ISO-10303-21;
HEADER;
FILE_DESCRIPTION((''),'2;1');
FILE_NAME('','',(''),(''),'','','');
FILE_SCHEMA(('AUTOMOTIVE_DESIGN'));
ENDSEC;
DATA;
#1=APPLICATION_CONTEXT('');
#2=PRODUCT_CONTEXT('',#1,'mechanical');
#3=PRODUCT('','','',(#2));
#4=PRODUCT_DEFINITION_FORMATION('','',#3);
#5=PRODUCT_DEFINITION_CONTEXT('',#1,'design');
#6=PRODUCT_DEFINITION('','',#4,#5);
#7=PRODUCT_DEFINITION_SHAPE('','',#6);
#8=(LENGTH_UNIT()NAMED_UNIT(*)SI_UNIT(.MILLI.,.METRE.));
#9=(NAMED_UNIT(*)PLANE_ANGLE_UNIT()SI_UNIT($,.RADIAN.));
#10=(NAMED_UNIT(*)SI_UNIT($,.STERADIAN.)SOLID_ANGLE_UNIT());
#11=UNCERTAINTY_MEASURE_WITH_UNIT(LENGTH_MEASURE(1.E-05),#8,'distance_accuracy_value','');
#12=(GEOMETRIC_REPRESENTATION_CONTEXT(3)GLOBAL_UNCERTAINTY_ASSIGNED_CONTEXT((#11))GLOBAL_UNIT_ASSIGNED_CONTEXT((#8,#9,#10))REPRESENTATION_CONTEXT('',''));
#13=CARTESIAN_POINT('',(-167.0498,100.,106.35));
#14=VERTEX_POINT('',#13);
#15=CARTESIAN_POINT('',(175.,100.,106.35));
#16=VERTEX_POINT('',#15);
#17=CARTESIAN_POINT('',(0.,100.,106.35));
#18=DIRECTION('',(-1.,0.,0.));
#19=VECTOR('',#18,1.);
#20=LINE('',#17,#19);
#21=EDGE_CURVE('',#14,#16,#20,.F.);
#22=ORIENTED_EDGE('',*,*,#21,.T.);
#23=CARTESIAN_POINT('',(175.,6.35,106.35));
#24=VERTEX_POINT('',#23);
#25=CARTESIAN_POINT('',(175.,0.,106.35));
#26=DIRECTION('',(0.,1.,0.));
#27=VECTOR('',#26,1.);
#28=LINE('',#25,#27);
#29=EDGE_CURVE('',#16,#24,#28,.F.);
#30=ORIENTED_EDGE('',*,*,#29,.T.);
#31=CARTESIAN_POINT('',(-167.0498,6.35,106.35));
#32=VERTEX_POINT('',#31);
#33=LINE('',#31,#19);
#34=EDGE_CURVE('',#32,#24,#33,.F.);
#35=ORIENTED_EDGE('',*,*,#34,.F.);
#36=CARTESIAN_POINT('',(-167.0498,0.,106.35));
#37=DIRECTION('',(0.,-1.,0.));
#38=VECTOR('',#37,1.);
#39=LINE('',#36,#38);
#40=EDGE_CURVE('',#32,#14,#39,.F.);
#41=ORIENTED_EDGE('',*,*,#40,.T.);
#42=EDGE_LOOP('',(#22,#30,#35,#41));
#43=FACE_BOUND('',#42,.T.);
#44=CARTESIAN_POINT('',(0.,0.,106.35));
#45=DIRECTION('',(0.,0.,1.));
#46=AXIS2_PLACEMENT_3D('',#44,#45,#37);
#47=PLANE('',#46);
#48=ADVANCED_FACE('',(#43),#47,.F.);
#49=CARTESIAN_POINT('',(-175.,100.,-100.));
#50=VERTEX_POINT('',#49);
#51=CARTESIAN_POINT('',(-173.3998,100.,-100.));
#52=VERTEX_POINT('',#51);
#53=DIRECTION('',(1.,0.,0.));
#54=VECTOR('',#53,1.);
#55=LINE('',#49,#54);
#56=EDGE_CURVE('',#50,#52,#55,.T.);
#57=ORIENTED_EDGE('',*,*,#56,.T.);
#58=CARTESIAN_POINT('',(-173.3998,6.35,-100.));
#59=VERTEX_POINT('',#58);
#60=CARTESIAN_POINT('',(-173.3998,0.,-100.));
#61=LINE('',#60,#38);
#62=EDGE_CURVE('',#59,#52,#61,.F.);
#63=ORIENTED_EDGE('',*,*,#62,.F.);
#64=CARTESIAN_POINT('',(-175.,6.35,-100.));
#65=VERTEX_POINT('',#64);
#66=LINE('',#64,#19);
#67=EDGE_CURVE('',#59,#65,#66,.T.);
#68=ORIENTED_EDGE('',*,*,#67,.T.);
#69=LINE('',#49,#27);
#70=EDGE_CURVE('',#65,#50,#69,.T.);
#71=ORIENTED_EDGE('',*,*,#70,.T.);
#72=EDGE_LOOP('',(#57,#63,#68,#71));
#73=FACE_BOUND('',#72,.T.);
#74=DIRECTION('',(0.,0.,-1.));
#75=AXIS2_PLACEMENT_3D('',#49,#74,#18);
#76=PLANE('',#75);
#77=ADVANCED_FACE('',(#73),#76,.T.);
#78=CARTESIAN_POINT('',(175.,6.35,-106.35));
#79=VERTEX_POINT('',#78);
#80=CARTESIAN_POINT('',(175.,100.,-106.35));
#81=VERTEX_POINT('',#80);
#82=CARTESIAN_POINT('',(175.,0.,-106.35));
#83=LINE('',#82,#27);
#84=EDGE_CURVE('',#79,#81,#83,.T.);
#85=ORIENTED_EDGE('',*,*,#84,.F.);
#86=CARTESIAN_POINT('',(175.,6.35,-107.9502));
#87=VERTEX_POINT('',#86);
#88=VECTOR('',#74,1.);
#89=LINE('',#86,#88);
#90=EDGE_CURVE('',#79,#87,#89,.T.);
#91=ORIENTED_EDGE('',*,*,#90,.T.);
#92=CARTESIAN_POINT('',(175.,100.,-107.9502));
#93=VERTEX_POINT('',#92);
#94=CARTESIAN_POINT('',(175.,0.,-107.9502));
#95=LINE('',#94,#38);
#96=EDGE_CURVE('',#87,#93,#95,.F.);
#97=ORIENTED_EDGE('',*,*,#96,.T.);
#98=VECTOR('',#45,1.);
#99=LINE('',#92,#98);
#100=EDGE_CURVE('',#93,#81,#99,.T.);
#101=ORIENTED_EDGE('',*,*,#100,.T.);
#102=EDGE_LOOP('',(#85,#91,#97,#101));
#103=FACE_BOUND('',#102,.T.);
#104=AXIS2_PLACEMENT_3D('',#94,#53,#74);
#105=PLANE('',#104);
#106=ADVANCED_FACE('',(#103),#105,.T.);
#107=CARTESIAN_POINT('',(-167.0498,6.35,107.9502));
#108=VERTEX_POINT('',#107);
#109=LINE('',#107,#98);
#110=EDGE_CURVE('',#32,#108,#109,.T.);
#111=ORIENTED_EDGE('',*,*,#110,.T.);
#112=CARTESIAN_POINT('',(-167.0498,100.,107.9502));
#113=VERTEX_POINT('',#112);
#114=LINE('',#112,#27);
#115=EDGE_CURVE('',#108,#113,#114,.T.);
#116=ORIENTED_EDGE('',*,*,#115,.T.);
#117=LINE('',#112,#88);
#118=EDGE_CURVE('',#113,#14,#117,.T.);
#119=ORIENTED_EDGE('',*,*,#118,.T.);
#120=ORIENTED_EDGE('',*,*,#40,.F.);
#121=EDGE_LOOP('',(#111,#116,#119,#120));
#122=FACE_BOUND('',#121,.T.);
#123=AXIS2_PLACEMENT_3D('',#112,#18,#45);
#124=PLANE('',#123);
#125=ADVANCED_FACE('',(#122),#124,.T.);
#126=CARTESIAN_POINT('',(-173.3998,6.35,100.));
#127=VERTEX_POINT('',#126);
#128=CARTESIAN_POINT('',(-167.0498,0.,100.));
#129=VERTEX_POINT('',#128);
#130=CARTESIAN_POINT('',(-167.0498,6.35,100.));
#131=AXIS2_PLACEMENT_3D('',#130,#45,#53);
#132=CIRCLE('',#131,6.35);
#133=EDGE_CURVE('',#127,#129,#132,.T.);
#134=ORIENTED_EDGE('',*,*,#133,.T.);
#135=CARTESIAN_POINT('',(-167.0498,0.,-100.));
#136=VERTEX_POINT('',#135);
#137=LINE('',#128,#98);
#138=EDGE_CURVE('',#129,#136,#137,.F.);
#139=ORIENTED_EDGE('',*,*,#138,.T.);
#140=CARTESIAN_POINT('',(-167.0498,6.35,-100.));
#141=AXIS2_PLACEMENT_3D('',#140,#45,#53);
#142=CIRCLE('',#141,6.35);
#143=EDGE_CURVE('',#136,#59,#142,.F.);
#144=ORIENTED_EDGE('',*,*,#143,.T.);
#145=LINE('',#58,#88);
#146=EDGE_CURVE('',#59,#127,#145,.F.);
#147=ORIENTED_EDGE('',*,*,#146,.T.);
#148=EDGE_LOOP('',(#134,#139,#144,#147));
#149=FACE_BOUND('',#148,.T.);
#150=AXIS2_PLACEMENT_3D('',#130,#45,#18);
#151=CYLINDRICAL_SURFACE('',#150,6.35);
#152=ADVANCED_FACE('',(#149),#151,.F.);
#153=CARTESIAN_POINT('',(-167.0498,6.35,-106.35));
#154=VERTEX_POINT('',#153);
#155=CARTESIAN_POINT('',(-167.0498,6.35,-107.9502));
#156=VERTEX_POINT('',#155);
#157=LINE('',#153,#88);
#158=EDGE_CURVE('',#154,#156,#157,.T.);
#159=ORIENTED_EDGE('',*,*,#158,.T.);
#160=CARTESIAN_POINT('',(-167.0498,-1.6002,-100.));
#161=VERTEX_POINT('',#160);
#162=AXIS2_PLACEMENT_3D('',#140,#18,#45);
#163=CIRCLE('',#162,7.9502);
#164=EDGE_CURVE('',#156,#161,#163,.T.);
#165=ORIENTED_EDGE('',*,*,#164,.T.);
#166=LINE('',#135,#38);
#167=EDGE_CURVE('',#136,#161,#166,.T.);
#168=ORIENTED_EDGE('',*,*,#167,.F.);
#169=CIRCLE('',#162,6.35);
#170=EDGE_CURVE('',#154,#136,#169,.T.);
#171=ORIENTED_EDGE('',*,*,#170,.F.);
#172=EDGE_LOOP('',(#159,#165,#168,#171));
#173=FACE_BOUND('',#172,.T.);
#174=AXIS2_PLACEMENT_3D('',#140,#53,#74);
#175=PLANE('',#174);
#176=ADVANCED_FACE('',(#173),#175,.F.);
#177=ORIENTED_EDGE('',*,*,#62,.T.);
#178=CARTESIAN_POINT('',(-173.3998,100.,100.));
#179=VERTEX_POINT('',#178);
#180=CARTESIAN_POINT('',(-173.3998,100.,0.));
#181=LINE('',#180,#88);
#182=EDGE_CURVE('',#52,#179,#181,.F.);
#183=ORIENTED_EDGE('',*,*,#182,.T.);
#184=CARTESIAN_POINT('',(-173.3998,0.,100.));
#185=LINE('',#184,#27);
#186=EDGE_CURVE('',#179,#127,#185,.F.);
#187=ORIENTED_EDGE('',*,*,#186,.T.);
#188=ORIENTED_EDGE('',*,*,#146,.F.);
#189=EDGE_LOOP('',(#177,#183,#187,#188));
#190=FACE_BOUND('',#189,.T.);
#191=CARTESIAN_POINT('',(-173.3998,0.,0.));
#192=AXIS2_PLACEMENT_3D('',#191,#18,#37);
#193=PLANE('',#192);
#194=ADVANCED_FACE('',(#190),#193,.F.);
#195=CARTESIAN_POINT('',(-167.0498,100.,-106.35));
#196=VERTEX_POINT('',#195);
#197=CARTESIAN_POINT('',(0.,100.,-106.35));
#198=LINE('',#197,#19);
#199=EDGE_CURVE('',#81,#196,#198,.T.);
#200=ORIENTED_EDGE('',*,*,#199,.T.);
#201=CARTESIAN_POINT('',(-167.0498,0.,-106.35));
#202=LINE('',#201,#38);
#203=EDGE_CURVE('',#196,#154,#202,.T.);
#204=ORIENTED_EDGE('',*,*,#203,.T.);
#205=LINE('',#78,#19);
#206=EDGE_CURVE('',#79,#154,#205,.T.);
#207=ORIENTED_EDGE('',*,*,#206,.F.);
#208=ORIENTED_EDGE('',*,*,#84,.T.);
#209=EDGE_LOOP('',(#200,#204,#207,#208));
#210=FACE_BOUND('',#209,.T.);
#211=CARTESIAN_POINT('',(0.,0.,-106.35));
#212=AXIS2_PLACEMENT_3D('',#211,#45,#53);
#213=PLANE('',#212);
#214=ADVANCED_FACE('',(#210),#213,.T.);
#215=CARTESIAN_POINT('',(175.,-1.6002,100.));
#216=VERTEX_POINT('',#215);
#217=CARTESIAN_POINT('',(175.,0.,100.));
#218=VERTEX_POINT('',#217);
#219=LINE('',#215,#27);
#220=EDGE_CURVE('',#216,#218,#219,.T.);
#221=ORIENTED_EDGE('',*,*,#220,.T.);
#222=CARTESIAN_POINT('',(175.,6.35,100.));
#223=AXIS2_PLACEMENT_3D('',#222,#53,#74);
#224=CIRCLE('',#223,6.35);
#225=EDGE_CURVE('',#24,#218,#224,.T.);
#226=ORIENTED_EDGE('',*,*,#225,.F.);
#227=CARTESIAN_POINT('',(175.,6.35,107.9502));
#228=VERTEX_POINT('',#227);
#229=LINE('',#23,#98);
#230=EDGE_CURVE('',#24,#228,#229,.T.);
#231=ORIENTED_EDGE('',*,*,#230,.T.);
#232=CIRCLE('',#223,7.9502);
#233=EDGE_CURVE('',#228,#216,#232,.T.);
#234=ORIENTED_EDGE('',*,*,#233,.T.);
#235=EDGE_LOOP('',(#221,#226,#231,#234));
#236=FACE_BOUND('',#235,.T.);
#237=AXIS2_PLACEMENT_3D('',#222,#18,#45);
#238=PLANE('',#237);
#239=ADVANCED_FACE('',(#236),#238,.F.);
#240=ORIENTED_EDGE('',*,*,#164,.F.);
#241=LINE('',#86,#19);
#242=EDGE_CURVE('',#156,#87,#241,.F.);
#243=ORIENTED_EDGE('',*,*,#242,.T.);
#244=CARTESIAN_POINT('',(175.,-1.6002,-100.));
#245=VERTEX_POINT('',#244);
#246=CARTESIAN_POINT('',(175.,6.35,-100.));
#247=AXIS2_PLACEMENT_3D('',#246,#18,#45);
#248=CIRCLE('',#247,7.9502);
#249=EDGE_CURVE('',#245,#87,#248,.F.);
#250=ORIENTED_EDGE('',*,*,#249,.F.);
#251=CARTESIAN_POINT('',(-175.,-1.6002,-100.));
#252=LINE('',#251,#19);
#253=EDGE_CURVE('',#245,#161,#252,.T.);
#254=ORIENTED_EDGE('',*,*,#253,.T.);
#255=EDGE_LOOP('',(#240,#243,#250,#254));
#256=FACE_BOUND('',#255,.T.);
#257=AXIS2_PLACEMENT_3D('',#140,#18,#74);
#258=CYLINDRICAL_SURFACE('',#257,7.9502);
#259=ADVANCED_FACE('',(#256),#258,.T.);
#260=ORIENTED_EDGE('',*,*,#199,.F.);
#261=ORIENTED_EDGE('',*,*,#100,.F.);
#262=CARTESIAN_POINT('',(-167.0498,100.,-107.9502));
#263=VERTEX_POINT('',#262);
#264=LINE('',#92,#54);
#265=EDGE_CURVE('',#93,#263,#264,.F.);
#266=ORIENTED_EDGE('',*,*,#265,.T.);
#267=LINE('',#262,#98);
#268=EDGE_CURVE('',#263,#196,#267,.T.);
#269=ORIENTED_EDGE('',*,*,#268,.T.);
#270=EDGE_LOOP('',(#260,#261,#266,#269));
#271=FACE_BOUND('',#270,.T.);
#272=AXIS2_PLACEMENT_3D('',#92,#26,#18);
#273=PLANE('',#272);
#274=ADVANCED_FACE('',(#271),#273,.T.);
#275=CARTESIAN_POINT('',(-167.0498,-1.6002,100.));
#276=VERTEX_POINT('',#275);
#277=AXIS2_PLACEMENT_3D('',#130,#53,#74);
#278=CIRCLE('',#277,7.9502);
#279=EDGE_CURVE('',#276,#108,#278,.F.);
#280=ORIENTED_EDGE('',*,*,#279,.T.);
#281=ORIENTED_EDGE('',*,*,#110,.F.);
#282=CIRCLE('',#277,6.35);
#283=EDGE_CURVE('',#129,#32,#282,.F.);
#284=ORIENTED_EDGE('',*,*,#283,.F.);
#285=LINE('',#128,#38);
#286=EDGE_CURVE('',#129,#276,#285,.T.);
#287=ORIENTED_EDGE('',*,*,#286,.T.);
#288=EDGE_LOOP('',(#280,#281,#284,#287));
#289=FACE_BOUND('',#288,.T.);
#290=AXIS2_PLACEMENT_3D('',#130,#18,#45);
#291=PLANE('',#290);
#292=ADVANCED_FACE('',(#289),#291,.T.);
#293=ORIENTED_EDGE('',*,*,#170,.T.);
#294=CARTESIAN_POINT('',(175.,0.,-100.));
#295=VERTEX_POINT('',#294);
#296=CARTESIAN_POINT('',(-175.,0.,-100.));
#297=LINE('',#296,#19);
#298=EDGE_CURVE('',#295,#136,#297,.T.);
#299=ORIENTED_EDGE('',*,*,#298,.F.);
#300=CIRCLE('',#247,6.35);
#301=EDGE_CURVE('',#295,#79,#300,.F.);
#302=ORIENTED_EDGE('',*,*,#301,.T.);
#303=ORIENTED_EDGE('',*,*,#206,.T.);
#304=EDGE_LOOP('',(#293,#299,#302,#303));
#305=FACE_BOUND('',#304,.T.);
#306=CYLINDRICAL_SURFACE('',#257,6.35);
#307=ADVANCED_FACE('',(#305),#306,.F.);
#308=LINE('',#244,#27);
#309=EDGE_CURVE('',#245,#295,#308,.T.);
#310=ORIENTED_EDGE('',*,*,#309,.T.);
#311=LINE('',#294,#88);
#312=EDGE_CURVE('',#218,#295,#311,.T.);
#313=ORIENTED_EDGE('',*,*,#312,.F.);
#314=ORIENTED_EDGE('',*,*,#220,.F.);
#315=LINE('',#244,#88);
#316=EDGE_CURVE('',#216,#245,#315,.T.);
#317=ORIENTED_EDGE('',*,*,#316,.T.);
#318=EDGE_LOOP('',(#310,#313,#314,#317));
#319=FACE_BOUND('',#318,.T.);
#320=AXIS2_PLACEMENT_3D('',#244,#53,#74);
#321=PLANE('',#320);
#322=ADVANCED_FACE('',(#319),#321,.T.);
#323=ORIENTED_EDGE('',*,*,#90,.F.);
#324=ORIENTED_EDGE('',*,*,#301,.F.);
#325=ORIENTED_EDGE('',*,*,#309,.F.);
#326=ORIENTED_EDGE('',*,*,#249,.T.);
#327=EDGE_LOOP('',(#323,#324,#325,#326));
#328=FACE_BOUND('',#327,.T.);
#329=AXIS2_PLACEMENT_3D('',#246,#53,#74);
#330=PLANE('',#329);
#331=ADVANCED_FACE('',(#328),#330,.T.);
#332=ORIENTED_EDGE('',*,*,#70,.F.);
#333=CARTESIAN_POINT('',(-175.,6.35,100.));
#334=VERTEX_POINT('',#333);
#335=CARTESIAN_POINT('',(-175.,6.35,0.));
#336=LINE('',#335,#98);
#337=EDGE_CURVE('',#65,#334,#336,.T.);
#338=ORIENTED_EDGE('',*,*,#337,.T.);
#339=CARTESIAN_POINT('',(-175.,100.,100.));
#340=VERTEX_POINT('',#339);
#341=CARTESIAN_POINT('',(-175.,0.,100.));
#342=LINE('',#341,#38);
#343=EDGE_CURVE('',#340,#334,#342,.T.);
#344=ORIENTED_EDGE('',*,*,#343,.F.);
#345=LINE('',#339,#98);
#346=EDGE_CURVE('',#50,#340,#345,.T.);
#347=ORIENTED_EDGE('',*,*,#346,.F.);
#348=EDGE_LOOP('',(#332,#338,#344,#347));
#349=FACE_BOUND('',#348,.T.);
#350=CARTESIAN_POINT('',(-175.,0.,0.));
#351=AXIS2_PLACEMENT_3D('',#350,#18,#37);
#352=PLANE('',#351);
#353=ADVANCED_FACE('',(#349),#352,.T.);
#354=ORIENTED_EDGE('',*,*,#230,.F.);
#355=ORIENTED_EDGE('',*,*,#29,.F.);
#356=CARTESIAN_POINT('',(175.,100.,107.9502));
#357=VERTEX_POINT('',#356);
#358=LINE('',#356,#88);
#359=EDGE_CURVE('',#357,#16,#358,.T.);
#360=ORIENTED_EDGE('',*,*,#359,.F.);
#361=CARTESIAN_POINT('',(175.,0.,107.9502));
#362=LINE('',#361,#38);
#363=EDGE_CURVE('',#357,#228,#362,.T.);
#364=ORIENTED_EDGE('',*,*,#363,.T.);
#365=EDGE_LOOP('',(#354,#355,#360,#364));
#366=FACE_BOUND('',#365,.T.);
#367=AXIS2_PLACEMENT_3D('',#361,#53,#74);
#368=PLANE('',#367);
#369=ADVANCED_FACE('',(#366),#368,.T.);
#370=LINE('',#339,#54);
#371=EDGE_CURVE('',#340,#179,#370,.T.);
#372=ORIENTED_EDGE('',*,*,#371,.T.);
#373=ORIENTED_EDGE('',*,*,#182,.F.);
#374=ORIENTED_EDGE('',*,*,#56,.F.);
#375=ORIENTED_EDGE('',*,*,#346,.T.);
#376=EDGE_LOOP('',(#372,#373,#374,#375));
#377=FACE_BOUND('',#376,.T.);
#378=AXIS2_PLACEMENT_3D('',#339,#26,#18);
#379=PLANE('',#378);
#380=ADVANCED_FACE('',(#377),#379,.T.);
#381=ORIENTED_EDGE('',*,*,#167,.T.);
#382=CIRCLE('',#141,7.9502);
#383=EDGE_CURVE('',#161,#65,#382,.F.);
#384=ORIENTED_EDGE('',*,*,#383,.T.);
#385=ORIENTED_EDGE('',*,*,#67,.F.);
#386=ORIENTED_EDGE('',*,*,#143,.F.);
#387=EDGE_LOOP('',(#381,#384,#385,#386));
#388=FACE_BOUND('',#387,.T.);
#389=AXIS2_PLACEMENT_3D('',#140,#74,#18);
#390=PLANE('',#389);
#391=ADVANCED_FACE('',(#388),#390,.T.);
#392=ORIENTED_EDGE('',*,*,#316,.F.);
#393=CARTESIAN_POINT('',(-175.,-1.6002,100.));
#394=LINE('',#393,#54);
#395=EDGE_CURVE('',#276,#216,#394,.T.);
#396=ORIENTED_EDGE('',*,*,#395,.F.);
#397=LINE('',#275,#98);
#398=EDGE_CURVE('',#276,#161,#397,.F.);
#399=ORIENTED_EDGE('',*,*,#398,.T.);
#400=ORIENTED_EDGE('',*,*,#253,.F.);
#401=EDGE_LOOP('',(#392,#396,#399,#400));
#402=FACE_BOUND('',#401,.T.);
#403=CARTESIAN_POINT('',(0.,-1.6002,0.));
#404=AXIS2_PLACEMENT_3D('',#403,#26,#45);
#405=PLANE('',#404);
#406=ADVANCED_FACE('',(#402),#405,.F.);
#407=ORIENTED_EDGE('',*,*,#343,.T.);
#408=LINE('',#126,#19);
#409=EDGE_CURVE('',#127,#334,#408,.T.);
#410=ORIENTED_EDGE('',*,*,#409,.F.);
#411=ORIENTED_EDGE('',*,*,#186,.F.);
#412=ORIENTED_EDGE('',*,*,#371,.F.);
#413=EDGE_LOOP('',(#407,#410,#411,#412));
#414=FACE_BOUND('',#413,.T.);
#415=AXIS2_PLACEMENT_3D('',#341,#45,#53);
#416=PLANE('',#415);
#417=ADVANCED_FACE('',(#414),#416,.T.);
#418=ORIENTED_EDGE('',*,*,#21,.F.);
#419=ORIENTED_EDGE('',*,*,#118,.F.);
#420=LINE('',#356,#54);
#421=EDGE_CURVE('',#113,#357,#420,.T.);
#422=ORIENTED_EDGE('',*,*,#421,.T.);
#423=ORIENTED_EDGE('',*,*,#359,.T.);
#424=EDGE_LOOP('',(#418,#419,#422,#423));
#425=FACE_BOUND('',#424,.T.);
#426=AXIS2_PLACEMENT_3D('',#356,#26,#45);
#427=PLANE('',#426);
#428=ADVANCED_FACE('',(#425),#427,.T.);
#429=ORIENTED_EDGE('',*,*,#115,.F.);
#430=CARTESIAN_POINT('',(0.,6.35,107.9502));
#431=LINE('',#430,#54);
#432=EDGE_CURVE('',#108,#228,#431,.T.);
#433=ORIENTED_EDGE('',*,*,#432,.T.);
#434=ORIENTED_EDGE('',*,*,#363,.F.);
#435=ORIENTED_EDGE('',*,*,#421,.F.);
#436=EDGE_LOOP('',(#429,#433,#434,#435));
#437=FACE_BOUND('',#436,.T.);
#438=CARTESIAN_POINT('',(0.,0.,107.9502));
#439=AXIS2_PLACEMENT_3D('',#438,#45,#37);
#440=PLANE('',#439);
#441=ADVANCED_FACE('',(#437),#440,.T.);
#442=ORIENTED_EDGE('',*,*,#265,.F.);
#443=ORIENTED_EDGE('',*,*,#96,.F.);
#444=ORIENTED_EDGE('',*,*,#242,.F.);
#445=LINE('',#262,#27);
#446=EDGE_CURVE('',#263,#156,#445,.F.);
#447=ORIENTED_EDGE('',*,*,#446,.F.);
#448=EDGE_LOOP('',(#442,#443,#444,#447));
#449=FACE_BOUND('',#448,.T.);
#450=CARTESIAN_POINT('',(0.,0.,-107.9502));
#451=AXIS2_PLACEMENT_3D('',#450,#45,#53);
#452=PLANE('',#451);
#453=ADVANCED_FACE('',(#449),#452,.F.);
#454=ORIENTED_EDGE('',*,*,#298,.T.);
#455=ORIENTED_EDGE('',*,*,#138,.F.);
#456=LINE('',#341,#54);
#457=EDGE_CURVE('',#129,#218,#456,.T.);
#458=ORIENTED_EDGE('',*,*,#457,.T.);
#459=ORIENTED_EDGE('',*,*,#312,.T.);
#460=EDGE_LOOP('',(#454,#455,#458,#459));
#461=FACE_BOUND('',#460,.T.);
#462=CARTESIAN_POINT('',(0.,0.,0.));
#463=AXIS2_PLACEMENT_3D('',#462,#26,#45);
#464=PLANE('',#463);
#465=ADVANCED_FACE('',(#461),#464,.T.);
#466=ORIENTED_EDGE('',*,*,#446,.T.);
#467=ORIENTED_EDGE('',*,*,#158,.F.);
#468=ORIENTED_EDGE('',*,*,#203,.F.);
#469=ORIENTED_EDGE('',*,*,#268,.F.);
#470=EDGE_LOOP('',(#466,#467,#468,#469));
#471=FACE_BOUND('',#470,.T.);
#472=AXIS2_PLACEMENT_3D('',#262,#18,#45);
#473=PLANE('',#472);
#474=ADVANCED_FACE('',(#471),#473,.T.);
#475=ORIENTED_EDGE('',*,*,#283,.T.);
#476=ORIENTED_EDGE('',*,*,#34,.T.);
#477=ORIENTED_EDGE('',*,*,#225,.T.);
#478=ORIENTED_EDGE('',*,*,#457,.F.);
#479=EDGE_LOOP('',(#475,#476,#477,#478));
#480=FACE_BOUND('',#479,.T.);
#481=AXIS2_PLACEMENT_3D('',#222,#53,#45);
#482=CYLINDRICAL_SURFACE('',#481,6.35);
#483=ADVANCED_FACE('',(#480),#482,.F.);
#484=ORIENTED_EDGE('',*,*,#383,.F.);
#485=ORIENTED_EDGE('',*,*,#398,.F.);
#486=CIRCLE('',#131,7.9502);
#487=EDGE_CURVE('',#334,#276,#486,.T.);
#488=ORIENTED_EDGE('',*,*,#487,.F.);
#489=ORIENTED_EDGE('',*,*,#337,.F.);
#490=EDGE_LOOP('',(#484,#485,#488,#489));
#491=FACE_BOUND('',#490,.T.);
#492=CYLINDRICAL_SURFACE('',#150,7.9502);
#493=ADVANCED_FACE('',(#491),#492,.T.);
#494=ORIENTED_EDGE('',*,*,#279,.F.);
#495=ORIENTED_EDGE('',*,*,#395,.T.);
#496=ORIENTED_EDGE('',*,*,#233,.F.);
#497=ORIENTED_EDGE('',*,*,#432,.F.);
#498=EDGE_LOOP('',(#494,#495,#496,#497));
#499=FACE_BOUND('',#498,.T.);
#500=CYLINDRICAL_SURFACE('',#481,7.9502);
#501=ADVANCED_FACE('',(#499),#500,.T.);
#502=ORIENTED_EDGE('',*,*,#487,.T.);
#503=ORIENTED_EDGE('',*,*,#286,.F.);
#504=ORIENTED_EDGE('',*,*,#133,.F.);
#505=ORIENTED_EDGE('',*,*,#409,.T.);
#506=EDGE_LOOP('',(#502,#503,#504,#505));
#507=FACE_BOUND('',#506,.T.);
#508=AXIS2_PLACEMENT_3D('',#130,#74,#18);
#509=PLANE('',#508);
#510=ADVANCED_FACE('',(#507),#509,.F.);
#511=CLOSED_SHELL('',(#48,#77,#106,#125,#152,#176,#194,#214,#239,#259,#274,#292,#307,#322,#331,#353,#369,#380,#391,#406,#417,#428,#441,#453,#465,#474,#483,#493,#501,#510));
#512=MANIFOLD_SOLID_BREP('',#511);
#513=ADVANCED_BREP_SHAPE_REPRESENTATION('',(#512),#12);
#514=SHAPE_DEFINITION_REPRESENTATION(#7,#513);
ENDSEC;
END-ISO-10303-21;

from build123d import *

# Parameters (mm, degrees)
SKETCH1_W                    = 350
SKETCH1_H                    = 200
BASE_FLANGE1_DEPTH           = 1.6002
EDGE_FLANGE4_STRIP_W         = 19.1008
EDGE_FLANGE4_STRIP_H         = 1.6002
EDGE_FLANGE4_STRIP_CUT_DEPTH = 200
EDGE_FLANGE4_DEPTH           = 200
EDGE_FLANGE5_DEPTH           = 342.0498
EDGE_FLANGE5_BEND_DEPTH      = 342.0498


# Sheet-metal steps are written as plain solids
with BuildPart() as part:
    # Sketch1 → Base-Flange1 (new body)
    with BuildSketch(Plane(origin=(0, 0, 0), x_dir=(1, 0, 0), z_dir=(0, 1, 0))):
        Rectangle(SKETCH1_W, SKETCH1_H)
    extrude(amount=-BASE_FLANGE1_DEPTH)

    # Edge-Flange4 strip (across the edge) → Edge-Flange4 strip cut (cut)
    with BuildSketch(Plane(origin=(-175, 0, -100), x_dir=(1, 0, 0), z_dir=(0, 0, 1))):
        with Locations((-1.6002, -0.8001)):
            Rectangle(EDGE_FLANGE4_STRIP_W, EDGE_FLANGE4_STRIP_H)
    extrude(amount=EDGE_FLANGE4_STRIP_CUT_DEPTH, mode=Mode.SUBTRACT)

    # Edge-Flange4 section (across the edge) → Edge-Flange4 (add)
    with BuildSketch(Plane(origin=(-175, 0, -100), x_dir=(1, 0, 0), z_dir=(0, 0, 1))):
        with BuildLine():
            Line((0, 6.35), (0, 100))
            Line((0, 100), (1.6002, 100))
            Line((1.6002, 100), (1.6002, 6.35))
            ThreePointArc((1.6002, 6.35), (3.460071939, 1.859871939), (7.9502, 0))
            Line((7.9502, 0), (7.9502, -1.6002))
            ThreePointArc((7.9502, -1.6002), (2.328559668, 0.728359668), (0, 6.35))
        make_face()
    extrude(amount=EDGE_FLANGE4_DEPTH)

    # Edge-Flange5 section (across the edge) → Edge-Flange5 (add)
    with BuildSketch(Plane(origin=(-167.0498, 0, 106.35), x_dir=(0, 0, -1), z_dir=(1, 0, 0))):
        with BuildLine():
            Line((-1.6002, 6.35), (-1.6002, 100))
            Line((-1.6002, 100), (0, 100))
            Line((0, 100), (0, 6.35))
            ThreePointArc((0, 6.35), (1.859871939, 1.859871939), (6.35, 0))
            Line((6.35, 0), (6.35, -1.6002))
            ThreePointArc((6.35, -1.6002), (0.728359668, 0.728359668), (-1.6002, 6.35))
        make_face()
    extrude(amount=EDGE_FLANGE5_DEPTH)

    # Edge-Flange5 section 2 (across the edge) → Edge-Flange5 bend (add)
    with BuildSketch(Plane(origin=(175, 0, -106.35), x_dir=(0, 0, 1), z_dir=(-1, 0, 0))):
        with BuildLine():
            Line((-1.6002, 6.35), (-1.6002, 100))
            Line((-1.6002, 100), (0, 100))
            Line((0, 100), (0, 6.35))
            ThreePointArc((0, 6.35), (1.859871939, 1.859871939), (6.35, 0))
            Line((6.35, 0), (6.35, -1.6002))
            ThreePointArc((6.35, -1.6002), (0.728359668, 0.728359668), (-1.6002, 6.35))
        make_face()
    extrude(amount=EDGE_FLANGE5_BEND_DEPTH)


solid = part.part
